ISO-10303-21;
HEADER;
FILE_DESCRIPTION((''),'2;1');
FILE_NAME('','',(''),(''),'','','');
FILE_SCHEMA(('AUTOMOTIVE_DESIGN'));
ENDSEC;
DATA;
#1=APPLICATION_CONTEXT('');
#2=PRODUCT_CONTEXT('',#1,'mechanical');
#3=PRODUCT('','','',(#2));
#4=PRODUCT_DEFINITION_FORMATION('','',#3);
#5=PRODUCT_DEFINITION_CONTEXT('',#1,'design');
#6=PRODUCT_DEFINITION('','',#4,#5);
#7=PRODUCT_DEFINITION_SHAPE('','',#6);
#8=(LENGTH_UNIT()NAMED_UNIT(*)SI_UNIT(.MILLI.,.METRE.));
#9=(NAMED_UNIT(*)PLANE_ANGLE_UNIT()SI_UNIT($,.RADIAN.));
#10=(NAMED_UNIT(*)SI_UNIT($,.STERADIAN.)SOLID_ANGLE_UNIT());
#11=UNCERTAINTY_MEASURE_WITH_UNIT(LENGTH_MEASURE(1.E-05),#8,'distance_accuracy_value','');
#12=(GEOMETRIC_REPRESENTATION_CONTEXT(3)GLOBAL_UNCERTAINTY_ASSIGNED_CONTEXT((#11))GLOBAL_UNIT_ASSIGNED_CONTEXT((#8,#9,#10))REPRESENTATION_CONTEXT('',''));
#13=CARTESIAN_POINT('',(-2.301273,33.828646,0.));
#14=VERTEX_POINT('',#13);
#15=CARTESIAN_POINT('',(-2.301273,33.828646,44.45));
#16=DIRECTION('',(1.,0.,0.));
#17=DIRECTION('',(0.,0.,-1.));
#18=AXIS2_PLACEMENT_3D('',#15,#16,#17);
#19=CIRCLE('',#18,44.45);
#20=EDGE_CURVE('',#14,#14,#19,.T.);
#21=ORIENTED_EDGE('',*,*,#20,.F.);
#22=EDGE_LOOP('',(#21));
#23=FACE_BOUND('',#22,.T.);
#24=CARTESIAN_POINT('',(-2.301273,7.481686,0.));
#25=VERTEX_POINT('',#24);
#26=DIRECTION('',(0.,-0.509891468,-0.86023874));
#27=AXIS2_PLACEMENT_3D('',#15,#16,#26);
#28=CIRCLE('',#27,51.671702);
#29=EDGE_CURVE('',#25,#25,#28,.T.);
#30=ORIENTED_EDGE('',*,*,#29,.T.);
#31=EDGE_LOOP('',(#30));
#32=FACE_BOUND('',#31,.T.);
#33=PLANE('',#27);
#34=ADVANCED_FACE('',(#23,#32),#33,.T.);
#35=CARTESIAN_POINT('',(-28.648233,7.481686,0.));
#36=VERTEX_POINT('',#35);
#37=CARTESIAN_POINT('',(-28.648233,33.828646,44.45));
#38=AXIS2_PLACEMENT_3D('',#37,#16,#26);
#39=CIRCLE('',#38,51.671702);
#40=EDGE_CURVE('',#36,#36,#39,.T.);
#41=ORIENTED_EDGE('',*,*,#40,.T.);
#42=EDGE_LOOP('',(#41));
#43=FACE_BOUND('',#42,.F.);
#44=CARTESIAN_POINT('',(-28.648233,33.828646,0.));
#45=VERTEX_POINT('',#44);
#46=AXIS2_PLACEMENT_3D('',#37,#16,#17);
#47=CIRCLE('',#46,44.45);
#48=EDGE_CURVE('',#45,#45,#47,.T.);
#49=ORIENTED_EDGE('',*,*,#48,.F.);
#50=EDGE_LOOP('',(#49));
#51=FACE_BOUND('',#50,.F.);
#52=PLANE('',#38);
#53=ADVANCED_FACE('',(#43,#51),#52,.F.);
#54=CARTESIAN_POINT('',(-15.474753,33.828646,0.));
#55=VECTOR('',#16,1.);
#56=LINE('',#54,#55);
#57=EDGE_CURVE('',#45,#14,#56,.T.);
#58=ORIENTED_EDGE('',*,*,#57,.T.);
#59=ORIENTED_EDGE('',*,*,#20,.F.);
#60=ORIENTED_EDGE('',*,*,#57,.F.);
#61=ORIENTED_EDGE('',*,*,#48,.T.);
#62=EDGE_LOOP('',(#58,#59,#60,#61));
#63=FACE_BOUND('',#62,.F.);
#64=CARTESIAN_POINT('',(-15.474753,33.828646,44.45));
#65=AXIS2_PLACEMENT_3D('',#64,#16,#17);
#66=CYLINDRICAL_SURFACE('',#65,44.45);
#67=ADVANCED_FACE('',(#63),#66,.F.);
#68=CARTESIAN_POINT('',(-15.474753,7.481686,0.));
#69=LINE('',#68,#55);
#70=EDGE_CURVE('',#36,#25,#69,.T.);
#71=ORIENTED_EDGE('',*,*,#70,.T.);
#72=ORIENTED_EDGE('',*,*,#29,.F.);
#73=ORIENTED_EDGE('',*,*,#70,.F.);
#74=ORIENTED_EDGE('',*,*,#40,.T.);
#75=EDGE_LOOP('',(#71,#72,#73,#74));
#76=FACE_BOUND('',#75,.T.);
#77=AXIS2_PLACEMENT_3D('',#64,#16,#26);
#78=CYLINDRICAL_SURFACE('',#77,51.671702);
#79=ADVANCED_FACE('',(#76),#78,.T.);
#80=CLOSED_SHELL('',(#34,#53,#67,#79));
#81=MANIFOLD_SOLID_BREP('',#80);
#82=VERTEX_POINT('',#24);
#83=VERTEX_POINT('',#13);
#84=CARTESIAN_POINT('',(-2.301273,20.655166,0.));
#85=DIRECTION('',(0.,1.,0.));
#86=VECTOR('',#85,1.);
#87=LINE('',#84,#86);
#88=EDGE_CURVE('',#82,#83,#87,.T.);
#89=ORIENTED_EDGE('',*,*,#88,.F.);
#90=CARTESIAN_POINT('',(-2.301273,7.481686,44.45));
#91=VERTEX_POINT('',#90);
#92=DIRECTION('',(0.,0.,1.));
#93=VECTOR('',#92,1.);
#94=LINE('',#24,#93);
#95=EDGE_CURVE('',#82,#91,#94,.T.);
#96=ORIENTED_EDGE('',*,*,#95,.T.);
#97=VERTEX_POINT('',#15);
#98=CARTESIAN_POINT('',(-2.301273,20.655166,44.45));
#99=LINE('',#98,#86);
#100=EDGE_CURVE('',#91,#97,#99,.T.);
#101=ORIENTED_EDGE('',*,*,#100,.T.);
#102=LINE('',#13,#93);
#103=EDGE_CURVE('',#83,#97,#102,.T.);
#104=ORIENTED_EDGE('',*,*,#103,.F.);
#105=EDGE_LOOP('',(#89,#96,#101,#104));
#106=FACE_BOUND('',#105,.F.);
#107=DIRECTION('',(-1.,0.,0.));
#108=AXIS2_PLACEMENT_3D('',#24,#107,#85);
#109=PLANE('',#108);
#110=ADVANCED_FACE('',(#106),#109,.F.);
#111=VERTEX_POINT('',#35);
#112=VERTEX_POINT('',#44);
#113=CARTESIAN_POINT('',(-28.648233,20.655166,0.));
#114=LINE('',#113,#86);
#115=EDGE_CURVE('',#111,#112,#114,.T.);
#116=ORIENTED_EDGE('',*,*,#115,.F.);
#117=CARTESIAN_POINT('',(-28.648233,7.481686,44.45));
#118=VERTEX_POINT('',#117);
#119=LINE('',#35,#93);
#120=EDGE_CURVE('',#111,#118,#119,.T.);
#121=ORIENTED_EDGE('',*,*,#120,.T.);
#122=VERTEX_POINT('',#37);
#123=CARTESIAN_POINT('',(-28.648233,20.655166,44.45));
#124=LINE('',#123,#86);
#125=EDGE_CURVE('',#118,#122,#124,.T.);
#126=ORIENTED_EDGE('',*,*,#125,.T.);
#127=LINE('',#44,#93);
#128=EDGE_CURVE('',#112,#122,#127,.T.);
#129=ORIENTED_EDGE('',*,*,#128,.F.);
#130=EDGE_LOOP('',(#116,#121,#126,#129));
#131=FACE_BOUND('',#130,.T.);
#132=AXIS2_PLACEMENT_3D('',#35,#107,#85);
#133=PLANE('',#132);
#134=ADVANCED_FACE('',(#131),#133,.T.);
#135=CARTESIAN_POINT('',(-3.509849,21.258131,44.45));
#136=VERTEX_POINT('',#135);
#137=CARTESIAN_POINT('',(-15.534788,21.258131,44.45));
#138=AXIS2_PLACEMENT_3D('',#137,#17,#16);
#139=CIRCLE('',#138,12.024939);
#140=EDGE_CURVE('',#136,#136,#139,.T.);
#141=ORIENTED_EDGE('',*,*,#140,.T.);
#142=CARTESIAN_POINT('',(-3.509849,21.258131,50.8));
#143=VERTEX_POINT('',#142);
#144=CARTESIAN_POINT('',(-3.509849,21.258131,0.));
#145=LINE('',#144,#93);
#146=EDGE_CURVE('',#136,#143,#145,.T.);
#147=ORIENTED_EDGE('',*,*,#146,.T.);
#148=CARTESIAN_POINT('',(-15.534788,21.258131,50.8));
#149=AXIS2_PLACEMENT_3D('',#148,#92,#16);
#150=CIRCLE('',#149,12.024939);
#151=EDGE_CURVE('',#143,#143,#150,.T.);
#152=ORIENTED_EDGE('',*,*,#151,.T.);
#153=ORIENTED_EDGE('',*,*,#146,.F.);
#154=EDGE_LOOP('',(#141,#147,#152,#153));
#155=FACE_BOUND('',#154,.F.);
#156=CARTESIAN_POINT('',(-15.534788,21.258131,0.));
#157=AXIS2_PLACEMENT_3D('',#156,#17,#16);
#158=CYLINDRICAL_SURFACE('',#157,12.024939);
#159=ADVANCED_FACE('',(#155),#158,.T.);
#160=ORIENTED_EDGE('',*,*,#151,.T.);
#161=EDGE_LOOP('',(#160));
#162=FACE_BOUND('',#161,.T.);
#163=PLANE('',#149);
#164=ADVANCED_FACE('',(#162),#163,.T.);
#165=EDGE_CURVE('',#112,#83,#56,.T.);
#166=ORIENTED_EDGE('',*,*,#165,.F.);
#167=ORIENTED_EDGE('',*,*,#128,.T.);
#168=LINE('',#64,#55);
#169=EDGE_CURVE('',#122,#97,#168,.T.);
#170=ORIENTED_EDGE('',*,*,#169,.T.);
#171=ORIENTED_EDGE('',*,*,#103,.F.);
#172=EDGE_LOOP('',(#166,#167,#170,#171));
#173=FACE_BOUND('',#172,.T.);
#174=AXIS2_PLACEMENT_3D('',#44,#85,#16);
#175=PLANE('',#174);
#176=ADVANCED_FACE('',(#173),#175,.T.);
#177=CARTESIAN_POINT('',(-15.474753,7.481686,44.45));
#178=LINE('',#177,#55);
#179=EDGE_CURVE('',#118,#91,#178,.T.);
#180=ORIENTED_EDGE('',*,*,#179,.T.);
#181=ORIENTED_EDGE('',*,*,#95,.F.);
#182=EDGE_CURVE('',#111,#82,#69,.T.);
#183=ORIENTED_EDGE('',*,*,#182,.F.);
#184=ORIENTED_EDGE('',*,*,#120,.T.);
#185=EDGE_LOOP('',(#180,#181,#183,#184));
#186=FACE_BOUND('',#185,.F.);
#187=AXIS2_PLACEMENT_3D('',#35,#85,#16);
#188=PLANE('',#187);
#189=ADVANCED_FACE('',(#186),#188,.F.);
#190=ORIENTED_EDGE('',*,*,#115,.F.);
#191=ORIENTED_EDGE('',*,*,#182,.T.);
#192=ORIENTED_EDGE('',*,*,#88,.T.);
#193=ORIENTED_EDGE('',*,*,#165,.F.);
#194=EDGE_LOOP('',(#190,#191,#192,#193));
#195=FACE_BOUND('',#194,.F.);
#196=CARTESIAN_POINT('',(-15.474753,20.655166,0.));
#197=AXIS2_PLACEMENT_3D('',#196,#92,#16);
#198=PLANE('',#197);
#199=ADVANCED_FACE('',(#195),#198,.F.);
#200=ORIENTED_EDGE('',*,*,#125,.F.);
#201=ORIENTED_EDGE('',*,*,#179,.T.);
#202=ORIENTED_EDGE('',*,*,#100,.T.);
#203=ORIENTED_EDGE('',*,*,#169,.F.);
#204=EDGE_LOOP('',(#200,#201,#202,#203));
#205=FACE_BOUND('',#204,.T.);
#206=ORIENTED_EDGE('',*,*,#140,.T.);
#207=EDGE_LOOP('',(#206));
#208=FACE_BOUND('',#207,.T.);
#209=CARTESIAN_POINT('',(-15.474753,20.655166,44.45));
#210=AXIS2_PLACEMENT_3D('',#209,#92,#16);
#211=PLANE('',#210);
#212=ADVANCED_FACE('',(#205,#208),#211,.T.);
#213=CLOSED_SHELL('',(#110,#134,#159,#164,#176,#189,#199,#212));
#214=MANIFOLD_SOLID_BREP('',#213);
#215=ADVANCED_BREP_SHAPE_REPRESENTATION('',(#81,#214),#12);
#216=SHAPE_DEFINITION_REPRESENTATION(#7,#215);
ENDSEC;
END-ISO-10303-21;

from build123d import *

# Parameters (mm, degrees)
F1_R     = 12.0249392967
F2_DEPTH = 50.8
F0_W     = 26.346960105
F0_H     = 26.346960105
F3_DEPTH = 44.45


# Not quite as in the source:
# - the program builds the solid bodies; features that only make, move or delete a surface that nothing else refers to are left out


with BuildPart() as f2:
    # F1 (on Top) → F2 (new body)
    with BuildSketch(Plane.XY):
        with Locations((-15.5347883701, 21.2581306696)):
            Circle(F1_R)
    extrude(amount=F2_DEPTH)

    # F0 (on Top) → F3 (join)
    with BuildSketch(Plane.XY):
        with Locations((-15.4747529887, 20.6551658921)):
            Rectangle(F0_W, F0_H)
    extrude(amount=F3_DEPTH)


with BuildPart() as f5:
    # F0 (on Top) → F5 (revolve)
    with BuildSketch(Plane.XY):
        with Locations((-15.4747529887, 20.6551658921)):
            Rectangle(F0_W, F0_H)
    revolve(axis=Axis((-15.4747529887, 33.8286459446, 44.45), (1, 0, 0)))


solid = Compound([f2.part, f5.part])
